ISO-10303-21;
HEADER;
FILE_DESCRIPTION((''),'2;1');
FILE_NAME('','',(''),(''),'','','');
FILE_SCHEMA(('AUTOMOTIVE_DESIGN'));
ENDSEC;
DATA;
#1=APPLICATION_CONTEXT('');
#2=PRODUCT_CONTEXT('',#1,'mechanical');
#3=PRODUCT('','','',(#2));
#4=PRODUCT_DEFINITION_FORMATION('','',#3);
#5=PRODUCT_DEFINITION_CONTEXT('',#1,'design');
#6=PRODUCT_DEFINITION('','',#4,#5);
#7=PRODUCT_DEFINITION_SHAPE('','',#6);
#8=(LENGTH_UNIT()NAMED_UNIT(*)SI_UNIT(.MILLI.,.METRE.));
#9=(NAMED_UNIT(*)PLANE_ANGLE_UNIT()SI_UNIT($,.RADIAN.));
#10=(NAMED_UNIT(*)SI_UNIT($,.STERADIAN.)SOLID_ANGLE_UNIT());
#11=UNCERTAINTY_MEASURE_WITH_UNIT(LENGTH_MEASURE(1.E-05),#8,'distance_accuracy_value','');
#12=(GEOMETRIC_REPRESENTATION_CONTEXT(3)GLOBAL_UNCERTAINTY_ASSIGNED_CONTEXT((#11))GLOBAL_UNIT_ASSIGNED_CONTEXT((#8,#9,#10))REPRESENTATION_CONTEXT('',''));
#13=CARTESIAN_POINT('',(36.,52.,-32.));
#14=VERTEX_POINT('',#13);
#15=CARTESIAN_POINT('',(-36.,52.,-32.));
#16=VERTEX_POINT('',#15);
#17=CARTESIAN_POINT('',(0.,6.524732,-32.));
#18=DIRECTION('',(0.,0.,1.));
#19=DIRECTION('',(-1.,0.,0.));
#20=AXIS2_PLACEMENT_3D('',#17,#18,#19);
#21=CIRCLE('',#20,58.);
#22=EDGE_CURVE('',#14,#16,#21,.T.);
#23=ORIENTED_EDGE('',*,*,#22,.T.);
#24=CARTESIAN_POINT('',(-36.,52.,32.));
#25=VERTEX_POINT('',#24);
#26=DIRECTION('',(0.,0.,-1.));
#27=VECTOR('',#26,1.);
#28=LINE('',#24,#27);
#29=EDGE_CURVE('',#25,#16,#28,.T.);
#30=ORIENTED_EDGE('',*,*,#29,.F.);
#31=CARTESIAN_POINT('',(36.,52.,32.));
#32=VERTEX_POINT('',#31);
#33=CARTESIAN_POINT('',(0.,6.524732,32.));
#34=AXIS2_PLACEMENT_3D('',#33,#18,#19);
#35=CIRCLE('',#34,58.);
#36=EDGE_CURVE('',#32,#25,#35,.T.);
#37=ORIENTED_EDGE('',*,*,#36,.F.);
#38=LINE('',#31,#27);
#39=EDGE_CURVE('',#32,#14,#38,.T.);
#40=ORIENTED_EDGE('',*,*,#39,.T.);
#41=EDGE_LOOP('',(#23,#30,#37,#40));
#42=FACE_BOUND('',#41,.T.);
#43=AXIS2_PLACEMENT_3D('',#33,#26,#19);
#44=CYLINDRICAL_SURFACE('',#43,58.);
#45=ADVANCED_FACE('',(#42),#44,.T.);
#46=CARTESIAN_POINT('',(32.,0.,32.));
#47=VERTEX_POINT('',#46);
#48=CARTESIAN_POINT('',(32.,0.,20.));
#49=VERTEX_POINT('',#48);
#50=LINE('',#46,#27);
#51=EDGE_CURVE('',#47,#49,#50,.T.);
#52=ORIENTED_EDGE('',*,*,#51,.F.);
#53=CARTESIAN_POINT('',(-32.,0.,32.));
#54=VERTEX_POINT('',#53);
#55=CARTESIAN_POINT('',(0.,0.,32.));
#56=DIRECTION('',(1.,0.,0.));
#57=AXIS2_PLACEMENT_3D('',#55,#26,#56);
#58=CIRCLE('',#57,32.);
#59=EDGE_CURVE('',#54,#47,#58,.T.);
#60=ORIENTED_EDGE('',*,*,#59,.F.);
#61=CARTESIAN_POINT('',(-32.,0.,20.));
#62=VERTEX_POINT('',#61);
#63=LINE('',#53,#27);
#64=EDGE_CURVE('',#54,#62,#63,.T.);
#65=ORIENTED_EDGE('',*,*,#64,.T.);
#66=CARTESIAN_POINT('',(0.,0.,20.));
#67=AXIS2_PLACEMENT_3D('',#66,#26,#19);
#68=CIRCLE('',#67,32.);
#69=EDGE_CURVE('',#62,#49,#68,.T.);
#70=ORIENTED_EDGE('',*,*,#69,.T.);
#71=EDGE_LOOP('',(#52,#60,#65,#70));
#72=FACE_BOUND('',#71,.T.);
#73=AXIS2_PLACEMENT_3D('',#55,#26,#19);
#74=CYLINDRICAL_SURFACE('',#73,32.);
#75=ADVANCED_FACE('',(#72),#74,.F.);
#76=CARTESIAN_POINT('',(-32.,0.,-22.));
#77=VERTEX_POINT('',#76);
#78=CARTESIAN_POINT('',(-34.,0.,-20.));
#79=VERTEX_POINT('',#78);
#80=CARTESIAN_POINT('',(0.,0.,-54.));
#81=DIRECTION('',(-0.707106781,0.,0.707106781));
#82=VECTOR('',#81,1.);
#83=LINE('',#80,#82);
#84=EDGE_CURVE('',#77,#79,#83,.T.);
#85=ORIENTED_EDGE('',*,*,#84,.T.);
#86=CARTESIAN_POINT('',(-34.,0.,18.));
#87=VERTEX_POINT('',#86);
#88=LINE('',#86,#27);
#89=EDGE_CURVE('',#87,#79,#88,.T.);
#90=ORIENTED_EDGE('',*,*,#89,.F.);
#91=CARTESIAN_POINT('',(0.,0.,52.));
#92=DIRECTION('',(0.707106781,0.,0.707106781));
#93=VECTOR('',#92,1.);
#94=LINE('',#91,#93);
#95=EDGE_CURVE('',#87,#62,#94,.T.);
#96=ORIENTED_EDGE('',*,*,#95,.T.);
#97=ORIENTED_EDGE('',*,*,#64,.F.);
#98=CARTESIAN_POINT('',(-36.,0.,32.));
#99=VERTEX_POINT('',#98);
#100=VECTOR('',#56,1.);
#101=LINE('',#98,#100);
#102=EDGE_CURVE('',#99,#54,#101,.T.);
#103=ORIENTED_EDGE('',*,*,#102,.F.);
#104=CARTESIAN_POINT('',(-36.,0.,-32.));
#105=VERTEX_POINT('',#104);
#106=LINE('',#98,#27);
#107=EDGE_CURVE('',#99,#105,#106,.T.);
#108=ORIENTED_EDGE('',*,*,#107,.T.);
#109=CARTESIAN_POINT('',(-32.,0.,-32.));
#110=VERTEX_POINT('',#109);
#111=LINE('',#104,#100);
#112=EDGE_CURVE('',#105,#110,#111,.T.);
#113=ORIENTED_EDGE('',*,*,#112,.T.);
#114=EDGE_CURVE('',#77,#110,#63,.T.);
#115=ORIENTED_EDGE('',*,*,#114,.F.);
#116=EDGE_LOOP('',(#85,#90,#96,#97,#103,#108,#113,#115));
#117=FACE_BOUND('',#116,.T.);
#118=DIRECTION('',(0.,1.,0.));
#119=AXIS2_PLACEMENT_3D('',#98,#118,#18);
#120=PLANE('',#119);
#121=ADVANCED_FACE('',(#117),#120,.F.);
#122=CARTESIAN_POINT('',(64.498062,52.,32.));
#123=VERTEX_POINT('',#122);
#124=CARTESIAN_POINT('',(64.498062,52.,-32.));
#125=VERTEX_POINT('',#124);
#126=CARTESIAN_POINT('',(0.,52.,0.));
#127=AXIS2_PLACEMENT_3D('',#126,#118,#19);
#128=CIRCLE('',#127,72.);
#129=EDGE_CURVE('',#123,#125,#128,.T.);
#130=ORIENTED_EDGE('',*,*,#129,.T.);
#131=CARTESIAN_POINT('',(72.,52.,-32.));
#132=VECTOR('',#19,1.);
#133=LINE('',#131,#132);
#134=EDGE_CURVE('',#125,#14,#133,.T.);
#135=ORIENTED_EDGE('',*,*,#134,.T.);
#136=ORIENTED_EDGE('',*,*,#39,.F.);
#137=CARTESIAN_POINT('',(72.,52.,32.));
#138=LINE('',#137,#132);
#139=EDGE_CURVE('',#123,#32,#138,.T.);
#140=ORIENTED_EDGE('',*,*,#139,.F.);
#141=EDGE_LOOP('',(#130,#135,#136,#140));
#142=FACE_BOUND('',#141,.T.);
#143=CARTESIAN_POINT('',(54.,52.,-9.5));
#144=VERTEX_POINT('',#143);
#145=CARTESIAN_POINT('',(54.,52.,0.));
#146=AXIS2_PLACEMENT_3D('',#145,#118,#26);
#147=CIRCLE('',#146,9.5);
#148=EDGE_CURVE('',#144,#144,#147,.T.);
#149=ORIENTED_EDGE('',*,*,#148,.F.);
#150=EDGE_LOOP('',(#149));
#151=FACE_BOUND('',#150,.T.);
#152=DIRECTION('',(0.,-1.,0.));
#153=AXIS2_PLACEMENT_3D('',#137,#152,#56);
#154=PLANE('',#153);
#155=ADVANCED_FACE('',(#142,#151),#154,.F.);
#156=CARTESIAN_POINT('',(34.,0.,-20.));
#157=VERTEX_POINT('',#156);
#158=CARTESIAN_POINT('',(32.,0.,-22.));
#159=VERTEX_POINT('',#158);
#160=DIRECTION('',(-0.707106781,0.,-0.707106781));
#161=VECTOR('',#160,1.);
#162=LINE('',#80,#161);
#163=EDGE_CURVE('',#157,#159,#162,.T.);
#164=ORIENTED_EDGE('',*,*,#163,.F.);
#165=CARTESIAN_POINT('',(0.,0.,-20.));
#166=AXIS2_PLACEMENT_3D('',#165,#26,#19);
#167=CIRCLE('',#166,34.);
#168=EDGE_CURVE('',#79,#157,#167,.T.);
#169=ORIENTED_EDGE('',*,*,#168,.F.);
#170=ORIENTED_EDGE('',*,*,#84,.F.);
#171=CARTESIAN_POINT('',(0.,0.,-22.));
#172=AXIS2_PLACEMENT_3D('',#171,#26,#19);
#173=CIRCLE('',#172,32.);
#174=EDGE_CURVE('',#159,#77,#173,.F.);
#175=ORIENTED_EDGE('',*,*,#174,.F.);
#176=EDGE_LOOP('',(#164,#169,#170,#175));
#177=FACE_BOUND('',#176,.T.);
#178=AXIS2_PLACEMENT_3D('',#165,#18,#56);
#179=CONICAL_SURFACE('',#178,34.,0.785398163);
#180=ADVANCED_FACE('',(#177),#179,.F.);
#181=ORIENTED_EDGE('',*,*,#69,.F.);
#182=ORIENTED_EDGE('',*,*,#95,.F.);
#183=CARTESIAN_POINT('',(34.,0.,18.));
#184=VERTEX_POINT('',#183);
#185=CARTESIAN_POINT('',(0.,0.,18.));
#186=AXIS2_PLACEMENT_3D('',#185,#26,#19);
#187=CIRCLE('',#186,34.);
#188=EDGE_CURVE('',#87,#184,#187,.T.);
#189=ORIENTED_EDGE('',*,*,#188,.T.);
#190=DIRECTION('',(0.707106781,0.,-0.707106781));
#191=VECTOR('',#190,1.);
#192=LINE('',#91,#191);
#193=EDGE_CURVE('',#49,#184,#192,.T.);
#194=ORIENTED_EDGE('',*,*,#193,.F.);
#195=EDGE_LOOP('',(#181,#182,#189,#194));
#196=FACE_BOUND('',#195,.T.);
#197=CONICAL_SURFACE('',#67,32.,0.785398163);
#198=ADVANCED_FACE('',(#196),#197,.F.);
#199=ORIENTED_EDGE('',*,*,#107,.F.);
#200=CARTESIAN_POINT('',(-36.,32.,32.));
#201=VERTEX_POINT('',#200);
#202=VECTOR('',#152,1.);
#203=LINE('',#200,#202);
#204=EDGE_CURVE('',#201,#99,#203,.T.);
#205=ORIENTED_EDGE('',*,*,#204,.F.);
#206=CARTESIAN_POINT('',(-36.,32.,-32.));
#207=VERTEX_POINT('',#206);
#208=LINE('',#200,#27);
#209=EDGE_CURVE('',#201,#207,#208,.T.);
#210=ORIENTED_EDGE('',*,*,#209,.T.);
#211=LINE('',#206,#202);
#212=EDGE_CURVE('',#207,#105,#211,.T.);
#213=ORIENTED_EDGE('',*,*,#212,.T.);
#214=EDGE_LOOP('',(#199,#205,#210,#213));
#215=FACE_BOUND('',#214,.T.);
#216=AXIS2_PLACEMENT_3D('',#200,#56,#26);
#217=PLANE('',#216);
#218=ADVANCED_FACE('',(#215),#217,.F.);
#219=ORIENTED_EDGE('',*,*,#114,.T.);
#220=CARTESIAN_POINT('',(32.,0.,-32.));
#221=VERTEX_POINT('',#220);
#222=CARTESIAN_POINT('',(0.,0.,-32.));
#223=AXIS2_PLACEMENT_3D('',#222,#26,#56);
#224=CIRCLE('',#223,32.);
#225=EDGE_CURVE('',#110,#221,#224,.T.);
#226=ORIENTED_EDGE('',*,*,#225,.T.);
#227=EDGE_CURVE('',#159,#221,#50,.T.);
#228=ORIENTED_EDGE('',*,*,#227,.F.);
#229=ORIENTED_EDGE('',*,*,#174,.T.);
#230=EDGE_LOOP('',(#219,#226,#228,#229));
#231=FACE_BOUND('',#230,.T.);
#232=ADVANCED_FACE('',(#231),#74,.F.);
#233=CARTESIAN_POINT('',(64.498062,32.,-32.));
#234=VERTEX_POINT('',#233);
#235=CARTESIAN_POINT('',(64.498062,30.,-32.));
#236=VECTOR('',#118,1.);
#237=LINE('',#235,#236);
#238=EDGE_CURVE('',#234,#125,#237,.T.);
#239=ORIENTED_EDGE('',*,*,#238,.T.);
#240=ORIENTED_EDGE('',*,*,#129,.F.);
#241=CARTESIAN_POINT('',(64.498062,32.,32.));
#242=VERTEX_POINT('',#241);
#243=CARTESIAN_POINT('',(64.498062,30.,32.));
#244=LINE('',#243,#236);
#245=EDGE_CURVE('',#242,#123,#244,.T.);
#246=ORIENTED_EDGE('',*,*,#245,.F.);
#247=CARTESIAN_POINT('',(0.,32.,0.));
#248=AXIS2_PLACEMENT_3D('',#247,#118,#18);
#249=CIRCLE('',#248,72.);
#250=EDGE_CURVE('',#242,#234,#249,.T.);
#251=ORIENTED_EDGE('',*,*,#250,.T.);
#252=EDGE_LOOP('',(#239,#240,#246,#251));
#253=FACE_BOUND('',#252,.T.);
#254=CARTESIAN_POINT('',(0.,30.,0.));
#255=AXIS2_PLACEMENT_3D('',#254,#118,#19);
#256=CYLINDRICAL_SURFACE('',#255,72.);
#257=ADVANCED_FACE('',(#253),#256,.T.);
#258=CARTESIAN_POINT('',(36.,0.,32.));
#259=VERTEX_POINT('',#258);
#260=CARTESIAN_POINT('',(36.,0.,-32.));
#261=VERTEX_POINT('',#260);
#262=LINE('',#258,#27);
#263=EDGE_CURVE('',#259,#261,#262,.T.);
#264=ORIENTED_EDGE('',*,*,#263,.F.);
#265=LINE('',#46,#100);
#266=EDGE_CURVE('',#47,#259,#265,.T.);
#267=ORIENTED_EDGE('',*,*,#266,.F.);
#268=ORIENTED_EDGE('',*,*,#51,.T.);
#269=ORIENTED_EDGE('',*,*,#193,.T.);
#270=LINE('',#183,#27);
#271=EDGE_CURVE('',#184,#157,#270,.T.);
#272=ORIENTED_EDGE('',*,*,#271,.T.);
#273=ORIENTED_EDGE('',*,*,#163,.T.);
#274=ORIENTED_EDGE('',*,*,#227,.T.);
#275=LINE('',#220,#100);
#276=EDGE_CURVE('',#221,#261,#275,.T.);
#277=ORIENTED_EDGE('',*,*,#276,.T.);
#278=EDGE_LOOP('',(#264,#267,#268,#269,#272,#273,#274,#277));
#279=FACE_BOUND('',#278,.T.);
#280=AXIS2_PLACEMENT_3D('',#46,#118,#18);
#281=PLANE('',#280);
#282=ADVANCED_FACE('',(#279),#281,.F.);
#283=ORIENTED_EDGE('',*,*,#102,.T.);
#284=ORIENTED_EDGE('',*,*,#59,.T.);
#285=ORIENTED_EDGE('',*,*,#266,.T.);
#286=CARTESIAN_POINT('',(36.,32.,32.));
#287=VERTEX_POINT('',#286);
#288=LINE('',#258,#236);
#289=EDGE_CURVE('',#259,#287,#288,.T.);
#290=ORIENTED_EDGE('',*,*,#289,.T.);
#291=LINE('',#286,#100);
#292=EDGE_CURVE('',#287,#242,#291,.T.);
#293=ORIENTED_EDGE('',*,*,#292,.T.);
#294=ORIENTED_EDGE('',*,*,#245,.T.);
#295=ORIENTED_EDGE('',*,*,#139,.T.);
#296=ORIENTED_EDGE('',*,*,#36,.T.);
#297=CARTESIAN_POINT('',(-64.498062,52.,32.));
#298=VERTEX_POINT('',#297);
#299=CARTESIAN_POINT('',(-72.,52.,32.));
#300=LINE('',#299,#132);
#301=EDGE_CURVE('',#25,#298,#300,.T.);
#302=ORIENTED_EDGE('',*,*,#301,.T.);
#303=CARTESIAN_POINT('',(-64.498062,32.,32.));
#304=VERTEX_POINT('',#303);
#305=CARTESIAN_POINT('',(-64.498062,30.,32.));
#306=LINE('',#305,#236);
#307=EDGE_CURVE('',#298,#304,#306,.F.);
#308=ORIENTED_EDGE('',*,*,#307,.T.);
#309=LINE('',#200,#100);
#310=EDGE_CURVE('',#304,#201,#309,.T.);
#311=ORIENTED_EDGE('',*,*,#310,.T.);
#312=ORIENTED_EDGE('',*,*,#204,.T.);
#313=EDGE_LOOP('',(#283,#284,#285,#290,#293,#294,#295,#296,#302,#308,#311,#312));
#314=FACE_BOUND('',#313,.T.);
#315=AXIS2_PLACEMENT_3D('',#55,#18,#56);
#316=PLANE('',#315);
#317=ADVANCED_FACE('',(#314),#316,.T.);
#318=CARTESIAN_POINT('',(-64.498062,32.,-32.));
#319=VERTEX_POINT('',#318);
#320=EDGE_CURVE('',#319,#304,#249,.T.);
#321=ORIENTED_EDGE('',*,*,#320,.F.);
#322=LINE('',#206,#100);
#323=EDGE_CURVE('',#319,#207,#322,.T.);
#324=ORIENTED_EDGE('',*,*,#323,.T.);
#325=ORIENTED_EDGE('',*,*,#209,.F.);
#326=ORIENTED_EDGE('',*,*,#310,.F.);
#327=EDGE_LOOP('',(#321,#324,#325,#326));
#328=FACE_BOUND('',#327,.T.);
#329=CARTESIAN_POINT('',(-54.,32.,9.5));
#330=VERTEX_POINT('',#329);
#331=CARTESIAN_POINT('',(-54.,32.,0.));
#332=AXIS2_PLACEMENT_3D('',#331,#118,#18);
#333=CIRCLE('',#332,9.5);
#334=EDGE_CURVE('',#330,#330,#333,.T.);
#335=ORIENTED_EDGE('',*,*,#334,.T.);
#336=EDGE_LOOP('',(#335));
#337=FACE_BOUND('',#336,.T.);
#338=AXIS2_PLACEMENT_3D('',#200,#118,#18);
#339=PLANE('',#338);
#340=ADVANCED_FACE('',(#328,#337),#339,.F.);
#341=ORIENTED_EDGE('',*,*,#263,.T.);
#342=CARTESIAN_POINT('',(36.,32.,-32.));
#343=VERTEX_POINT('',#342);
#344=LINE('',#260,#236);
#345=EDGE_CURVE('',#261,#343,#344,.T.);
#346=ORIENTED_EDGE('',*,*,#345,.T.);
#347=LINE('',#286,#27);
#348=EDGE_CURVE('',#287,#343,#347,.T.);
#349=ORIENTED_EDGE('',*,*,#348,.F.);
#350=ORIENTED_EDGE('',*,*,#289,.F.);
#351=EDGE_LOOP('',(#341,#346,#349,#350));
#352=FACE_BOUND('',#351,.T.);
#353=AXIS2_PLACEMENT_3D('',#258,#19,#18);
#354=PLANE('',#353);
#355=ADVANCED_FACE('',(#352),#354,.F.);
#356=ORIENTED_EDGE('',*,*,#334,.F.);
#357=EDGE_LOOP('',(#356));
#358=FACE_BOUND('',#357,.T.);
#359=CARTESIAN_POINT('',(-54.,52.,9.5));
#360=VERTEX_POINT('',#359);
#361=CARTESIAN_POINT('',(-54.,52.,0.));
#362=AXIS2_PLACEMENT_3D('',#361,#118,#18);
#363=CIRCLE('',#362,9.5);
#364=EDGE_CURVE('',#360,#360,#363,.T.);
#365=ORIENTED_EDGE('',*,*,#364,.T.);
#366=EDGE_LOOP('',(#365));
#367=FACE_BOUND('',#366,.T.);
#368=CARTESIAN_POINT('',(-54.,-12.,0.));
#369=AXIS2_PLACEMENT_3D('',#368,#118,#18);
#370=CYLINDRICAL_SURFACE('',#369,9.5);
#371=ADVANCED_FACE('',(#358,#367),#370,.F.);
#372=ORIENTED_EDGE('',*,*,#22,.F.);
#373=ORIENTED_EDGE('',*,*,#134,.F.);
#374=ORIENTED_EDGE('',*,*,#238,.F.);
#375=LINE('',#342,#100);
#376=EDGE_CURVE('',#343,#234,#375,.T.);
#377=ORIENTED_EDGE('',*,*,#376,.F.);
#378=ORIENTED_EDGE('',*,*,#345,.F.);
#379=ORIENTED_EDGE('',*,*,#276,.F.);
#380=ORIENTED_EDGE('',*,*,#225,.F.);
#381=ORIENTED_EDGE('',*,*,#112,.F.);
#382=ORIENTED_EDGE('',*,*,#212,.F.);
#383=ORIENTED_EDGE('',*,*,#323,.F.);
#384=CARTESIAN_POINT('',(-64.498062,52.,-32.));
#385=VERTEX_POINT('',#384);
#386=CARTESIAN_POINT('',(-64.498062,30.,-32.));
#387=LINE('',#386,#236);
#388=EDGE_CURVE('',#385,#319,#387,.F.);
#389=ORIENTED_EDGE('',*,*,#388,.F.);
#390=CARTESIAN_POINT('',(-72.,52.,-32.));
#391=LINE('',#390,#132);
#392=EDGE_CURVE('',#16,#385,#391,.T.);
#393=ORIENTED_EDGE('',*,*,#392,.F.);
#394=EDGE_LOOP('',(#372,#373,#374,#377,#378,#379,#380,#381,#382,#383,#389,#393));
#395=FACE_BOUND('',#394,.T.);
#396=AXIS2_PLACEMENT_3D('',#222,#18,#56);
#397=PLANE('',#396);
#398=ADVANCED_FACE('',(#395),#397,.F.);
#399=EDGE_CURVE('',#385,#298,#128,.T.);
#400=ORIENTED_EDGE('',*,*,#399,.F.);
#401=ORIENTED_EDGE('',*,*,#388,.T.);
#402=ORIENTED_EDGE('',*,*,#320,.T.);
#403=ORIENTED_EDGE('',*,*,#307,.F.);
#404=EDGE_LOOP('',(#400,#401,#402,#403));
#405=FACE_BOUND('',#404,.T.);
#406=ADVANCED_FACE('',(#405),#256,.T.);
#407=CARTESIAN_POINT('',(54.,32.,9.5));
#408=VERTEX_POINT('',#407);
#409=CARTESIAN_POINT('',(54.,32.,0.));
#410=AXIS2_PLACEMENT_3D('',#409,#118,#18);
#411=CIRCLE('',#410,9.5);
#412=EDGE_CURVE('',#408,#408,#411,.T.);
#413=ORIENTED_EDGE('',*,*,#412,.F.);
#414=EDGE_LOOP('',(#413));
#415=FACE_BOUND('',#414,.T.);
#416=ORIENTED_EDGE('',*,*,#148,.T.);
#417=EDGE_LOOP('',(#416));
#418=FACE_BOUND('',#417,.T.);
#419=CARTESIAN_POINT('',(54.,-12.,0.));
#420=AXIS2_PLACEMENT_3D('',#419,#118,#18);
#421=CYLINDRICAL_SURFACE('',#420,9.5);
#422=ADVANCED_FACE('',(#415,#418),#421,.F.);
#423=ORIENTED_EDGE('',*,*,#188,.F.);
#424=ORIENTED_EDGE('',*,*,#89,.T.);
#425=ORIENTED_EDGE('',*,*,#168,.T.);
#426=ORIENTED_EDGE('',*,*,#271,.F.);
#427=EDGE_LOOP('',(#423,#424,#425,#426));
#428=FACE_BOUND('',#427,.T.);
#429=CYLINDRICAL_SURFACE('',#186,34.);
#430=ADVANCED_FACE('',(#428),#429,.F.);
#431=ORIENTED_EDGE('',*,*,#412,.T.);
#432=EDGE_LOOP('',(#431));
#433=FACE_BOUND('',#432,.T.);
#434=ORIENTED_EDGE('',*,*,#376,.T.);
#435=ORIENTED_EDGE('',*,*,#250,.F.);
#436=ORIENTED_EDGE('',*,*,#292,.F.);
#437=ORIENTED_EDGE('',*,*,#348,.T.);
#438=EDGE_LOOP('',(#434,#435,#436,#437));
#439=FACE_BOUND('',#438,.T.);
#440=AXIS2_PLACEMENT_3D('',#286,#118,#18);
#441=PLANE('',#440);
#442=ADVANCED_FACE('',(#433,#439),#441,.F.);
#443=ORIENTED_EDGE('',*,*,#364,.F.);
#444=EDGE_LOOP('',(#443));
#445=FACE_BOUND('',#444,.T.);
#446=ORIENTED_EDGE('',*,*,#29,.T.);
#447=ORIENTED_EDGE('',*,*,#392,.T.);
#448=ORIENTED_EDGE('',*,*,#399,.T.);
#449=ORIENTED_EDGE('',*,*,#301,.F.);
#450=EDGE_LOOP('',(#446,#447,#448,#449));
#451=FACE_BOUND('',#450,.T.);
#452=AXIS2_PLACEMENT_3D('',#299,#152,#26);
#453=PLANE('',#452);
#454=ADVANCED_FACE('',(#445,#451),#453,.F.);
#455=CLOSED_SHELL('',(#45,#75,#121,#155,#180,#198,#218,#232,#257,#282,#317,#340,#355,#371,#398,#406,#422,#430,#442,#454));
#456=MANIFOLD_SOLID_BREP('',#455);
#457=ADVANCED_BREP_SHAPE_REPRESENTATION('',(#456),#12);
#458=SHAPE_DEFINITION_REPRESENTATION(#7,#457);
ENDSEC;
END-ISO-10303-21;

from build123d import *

# Parameters (mm, degrees)
BOSS_EXTRUDE1_DEPTH = 32
SKETCH2_R           = 9.5
CUT_EXTRUDE1_DEPTH  = 64
CUT_EXTRUDE2_DEPTH  = 22
CUT_EXTRUDE3_START  = -50
CUT_EXTRUDE3_DEPTH  = 38
CHAMFER1_SIZE       = 2


with BuildPart() as part:
    # Sketch1 → Boss-Extrude1 (new, symmetric)
    with BuildSketch(Plane.XY):
        with BuildLine():
            Line((-36, 0), (-32, 0))
            ThreePointArc((-32, 0), (0, 32), (32, 0))
            Line((32, 0), (36, 0))
            Line((36, 0), (36, 32))
            Line((36, 32), (72, 32))
            Line((72, 32), (72, 52))
            Line((72, 52), (36, 52))
            ThreePointArc((36, 52), (0, 64.524731996), (-36, 52))
            Line((-36, 52), (-72, 52))
            Line((-72, 52), (-72, 32))
            Line((-72, 32), (-36, 32))
            Line((-36, 32), (-36, 0))
        make_face()
    extrude(amount=BOSS_EXTRUDE1_DEPTH, both=True)

    # Sketch2 → Cut-Extrude1 (cut)
    with BuildSketch(Plane(origin=(0, 52, 0), x_dir=(1, 0, 0), z_dir=(0, 1, 0))):
        with Locations(Location((-54, 0, 0), (0, 0, 270))):
            Circle(SKETCH2_R)
        with Locations(Location((54, 0, 0), (0, 0, 270))):
            Circle(SKETCH2_R)
    extrude(amount=-CUT_EXTRUDE1_DEPTH, mode=Mode.SUBTRACT)

    # Sketch3 → Cut-Extrude2 (cut)
    with BuildSketch(Plane(origin=(0, 52, 0), x_dir=(1, 0, 0), z_dir=(0, 1, 0))):
        with BuildLine():
            ThreePointArc((-72, -4.4e-08), (-70.099431041, 16.433799554), (-64.498061986, 32))
            Line((-64.498061986, 32), (-72, 32))
            Line((-72, 32), (-72, -4.4e-08))
        make_face()
        with BuildLine():
            Line((-72, -32), (-64.498061986, -32))
            ThreePointArc((-64.498061986, -32), (-70.099431031, -16.433799597), (-72, -4.4e-08))
            Line((-72, -4.4e-08), (-72, -32))
        make_face()
        with BuildLine():
            Line((72, 32), (64.498061986, 32))
            ThreePointArc((64.498061986, 32), (70.099431036, 16.433799576), (72, 0))
            Line((72, 0), (72, 32))
        make_face()
        with BuildLine():
            ThreePointArc((72, 0), (70.099431036, -16.433799576), (64.498061986, -32))
            Line((64.498061986, -32), (72, -32))
            Line((72, -32), (72, 0))
        make_face()
    extrude(amount=-CUT_EXTRUDE2_DEPTH, mode=Mode.SUBTRACT)

    # Sketch5 → Cut-Extrude3 (cut)
    with BuildSketch(Plane(origin=(0, 0, -32), x_dir=(-1, 0, 0), z_dir=(0, 0, -1)).offset(CUT_EXTRUDE3_START)):
        with BuildLine():
            Line((-34, 0), (-32, 0))
            ThreePointArc((-32, 0), (0, 32), (32, 0))
            Line((32, 0), (34, 0))
            ThreePointArc((34, 0), (0, 34), (-34, 0))
        make_face()
    extrude(amount=CUT_EXTRUDE3_DEPTH, mode=Mode.SUBTRACT)

    # Chamfer1
    chamfer1_edges = [part.edges().sort_by_distance(p)[0] for p in [
        (0, 32, 18),
        (0, 32, -20),
    ]]
    chamfer(chamfer1_edges, length=CHAMFER1_SIZE - 0.0001)  # a hair under: the kernel refuses the full size


solid = part.part
